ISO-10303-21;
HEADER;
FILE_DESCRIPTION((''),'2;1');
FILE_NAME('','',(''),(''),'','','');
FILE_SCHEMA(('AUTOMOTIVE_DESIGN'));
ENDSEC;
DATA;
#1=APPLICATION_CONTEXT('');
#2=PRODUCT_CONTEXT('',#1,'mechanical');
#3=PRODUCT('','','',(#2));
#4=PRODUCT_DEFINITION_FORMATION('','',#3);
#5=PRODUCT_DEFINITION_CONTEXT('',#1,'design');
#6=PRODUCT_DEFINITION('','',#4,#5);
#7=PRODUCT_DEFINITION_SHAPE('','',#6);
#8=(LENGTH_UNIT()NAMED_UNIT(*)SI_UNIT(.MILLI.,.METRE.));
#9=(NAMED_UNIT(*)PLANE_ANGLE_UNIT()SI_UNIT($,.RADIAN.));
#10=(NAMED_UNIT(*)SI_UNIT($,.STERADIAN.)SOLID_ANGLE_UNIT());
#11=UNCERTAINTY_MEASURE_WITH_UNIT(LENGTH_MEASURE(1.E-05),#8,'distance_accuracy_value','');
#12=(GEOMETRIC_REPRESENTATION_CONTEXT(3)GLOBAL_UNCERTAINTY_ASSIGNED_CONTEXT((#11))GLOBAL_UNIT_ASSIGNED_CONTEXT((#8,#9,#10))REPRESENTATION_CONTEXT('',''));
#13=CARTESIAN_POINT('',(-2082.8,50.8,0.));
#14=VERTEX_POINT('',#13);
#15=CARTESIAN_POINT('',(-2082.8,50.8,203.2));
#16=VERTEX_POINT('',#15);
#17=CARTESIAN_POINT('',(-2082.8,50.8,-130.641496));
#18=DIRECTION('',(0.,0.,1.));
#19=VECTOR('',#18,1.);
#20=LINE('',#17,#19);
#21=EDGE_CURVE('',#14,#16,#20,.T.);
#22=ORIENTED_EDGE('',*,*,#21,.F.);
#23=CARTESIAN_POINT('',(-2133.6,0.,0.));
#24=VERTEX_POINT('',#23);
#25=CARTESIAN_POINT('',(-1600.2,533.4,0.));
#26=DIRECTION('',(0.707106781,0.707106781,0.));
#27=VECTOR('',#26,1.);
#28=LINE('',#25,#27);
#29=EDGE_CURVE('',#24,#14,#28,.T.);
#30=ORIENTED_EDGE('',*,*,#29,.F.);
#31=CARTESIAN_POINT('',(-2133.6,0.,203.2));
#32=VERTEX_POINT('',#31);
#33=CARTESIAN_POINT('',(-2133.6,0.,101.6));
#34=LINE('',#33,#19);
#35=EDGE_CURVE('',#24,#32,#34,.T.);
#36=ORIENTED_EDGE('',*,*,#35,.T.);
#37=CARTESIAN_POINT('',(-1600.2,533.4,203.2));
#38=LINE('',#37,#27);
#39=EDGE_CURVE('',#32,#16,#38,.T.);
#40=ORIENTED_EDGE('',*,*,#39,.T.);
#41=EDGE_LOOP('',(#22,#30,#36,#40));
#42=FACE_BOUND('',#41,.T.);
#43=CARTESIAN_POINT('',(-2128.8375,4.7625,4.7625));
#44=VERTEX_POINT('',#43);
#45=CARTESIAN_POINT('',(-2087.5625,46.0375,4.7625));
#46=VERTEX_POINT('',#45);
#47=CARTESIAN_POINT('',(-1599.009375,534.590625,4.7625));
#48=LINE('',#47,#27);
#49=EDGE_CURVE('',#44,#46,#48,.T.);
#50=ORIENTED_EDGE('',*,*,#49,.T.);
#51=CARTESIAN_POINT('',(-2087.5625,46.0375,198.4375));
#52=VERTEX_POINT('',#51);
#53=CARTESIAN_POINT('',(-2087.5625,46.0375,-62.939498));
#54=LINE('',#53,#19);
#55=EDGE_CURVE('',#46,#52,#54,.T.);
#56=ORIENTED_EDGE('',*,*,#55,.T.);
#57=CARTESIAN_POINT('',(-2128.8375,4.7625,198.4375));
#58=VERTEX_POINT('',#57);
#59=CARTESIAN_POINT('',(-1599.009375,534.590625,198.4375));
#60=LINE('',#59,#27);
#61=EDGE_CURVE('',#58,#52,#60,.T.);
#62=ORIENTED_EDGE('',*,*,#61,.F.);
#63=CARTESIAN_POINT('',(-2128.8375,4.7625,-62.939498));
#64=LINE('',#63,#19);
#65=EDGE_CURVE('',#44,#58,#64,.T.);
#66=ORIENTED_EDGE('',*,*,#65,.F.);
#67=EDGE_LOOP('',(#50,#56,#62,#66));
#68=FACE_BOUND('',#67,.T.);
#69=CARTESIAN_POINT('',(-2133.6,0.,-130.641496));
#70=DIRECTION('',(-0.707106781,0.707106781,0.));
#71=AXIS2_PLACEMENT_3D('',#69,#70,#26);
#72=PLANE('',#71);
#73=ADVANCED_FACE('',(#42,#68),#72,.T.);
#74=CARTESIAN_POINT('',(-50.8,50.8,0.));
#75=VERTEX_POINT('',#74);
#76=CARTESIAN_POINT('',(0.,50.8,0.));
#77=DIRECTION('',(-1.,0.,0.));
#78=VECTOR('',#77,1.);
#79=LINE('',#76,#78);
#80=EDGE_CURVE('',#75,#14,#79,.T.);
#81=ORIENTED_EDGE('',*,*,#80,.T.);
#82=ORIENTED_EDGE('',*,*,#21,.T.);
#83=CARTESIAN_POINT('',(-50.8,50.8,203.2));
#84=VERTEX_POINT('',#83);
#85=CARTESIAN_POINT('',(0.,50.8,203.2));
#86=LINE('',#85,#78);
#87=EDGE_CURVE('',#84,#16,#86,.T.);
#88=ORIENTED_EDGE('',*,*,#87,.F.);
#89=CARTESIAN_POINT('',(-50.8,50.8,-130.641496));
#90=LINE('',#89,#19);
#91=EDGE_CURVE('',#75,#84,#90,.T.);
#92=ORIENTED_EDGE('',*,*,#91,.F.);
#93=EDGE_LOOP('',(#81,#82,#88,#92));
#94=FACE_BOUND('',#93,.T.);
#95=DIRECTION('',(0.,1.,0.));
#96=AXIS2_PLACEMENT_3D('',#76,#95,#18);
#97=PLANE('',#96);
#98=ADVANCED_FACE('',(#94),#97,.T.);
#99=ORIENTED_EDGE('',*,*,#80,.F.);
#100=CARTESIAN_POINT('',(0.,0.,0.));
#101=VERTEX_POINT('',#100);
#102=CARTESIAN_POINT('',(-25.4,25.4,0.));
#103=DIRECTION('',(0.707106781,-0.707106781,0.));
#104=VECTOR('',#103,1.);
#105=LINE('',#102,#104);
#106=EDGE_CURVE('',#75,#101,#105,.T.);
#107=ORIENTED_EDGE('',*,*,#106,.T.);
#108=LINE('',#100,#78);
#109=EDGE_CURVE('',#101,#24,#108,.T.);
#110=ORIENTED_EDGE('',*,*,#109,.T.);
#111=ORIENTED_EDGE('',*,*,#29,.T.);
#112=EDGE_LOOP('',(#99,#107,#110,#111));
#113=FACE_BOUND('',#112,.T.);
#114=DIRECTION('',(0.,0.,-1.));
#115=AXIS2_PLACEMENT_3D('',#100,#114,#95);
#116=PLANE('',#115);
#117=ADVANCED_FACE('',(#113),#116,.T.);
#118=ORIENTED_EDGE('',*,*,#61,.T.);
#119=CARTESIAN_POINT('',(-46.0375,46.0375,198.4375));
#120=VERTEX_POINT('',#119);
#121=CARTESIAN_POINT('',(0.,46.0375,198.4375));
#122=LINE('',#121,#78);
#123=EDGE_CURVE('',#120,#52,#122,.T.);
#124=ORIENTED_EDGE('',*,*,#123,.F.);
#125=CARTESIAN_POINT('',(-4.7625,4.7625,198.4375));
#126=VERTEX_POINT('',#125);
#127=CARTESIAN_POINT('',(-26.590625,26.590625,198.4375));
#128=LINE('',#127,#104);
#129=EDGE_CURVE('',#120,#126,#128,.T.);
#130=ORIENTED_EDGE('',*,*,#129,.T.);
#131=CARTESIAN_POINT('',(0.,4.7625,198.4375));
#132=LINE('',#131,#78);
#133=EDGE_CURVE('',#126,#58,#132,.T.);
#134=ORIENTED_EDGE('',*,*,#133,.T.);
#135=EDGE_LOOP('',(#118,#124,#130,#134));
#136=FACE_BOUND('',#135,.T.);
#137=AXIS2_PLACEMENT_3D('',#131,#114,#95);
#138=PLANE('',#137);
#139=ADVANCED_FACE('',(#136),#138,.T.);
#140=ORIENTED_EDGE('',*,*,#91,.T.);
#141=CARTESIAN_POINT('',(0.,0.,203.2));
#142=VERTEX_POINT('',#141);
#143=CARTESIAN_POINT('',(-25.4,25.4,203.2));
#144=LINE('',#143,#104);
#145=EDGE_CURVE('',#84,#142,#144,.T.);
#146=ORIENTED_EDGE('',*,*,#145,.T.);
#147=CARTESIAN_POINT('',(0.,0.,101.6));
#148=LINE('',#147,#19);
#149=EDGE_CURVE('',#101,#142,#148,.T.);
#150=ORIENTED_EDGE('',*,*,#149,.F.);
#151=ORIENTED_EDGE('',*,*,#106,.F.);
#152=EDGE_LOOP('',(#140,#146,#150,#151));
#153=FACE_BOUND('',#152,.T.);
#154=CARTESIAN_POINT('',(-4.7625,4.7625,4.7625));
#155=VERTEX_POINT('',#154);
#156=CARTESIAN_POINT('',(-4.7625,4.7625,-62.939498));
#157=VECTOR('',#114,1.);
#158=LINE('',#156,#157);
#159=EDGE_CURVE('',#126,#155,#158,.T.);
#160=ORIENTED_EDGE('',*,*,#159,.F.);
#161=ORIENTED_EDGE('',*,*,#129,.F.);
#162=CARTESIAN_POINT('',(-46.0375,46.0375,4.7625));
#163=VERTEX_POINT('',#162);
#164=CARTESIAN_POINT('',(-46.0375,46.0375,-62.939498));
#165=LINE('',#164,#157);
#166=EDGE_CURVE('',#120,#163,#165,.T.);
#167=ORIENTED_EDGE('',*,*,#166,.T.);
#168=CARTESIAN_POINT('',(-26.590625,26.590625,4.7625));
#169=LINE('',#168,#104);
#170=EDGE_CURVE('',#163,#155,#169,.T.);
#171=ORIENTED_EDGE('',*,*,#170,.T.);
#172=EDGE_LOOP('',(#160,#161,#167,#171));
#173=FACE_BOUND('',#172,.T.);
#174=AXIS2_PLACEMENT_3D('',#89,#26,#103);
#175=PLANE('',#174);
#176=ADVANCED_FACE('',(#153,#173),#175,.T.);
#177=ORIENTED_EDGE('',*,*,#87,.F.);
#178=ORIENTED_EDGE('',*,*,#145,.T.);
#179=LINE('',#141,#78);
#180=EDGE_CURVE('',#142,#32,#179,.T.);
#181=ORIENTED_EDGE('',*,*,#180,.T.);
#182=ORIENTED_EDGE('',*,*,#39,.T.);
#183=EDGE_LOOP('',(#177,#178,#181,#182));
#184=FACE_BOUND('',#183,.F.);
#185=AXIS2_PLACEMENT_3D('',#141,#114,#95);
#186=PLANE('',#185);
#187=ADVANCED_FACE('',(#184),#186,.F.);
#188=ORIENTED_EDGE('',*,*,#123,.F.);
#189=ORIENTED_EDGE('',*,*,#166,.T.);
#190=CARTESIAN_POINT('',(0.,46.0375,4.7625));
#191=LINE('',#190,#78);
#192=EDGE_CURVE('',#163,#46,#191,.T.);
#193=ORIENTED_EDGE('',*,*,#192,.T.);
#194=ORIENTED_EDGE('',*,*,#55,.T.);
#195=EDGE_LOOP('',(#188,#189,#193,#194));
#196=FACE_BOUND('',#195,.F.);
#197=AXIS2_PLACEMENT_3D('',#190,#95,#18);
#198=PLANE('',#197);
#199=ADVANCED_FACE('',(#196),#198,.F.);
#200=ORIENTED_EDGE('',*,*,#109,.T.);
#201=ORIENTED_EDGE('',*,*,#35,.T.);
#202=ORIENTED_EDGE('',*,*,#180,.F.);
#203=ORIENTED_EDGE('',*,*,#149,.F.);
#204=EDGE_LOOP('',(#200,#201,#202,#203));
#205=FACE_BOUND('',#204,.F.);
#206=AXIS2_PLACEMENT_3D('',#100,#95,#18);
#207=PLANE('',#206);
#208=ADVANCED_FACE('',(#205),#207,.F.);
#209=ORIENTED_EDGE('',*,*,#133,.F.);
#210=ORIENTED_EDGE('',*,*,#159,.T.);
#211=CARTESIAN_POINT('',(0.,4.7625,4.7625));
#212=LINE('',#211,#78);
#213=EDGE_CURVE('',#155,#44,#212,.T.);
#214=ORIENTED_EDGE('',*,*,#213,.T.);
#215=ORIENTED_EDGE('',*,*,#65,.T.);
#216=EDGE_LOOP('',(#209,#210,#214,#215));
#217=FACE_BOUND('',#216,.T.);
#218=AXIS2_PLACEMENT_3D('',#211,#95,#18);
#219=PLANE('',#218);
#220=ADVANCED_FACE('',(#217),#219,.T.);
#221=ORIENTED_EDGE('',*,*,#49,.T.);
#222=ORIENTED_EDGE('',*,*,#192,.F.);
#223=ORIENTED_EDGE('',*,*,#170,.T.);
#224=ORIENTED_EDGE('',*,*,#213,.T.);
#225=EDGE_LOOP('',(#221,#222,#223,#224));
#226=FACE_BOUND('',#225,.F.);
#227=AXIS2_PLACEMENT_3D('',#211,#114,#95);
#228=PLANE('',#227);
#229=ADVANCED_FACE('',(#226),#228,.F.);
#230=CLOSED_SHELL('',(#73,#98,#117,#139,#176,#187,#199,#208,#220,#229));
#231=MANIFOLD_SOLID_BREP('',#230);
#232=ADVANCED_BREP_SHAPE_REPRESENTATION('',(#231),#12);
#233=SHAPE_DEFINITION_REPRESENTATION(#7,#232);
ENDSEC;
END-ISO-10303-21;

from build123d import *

# Parameters (mm, degrees)
F0_W        = 50.8
F0_H        = 203.2
F0_W_2      = 41.275
F0_H_2      = 193.675
F1_DEPTH    = 2133.6
F2_T1_DEPTH = 464.4829915773
F3_T1_DEPTH = 464.4829915773


# Not quite as in the source:
# - a fillet or chamfer that OpenCascade refuses, or shapes differently, is made with other operations: its cross-section is extruded or revolved along the edge and cut away or added


with BuildPart() as f1:
    # F0 (on Right) → F1 (new body)
    with BuildSketch(Plane.YZ):
        with Locations((25.4, 101.6)):
            Rectangle(F0_W, F0_H)
        with Locations((25.4, 101.6)):
            Rectangle(F0_W_2, F0_H_2, mode=Mode.SUBTRACT)
    extrude(amount=-F1_DEPTH)

    # F2: chamfer of 50.8 on 1 edges, made by hand

    # F2_s2 → F2_t1 (cut)
    with BuildSketch(Plane.XY.offset(-130.6414957887)):
        Polygon((-50.8, 50.8), (0, 0), (0, 50.8), align=None)
    extrude(amount=F2_T1_DEPTH, mode=Mode.SUBTRACT)

    # F3: chamfer of 50.8 on 1 edges, made by hand

    # F3_s2 → F3_t1 (cut)
    with BuildSketch(Plane.XY.offset(-130.6414957887)):
        Polygon((-2133.6, 0), (-2082.8, 50.8), (-2133.6, 50.8), align=None)
    extrude(amount=F3_T1_DEPTH, mode=Mode.SUBTRACT)


solid = f1.part
